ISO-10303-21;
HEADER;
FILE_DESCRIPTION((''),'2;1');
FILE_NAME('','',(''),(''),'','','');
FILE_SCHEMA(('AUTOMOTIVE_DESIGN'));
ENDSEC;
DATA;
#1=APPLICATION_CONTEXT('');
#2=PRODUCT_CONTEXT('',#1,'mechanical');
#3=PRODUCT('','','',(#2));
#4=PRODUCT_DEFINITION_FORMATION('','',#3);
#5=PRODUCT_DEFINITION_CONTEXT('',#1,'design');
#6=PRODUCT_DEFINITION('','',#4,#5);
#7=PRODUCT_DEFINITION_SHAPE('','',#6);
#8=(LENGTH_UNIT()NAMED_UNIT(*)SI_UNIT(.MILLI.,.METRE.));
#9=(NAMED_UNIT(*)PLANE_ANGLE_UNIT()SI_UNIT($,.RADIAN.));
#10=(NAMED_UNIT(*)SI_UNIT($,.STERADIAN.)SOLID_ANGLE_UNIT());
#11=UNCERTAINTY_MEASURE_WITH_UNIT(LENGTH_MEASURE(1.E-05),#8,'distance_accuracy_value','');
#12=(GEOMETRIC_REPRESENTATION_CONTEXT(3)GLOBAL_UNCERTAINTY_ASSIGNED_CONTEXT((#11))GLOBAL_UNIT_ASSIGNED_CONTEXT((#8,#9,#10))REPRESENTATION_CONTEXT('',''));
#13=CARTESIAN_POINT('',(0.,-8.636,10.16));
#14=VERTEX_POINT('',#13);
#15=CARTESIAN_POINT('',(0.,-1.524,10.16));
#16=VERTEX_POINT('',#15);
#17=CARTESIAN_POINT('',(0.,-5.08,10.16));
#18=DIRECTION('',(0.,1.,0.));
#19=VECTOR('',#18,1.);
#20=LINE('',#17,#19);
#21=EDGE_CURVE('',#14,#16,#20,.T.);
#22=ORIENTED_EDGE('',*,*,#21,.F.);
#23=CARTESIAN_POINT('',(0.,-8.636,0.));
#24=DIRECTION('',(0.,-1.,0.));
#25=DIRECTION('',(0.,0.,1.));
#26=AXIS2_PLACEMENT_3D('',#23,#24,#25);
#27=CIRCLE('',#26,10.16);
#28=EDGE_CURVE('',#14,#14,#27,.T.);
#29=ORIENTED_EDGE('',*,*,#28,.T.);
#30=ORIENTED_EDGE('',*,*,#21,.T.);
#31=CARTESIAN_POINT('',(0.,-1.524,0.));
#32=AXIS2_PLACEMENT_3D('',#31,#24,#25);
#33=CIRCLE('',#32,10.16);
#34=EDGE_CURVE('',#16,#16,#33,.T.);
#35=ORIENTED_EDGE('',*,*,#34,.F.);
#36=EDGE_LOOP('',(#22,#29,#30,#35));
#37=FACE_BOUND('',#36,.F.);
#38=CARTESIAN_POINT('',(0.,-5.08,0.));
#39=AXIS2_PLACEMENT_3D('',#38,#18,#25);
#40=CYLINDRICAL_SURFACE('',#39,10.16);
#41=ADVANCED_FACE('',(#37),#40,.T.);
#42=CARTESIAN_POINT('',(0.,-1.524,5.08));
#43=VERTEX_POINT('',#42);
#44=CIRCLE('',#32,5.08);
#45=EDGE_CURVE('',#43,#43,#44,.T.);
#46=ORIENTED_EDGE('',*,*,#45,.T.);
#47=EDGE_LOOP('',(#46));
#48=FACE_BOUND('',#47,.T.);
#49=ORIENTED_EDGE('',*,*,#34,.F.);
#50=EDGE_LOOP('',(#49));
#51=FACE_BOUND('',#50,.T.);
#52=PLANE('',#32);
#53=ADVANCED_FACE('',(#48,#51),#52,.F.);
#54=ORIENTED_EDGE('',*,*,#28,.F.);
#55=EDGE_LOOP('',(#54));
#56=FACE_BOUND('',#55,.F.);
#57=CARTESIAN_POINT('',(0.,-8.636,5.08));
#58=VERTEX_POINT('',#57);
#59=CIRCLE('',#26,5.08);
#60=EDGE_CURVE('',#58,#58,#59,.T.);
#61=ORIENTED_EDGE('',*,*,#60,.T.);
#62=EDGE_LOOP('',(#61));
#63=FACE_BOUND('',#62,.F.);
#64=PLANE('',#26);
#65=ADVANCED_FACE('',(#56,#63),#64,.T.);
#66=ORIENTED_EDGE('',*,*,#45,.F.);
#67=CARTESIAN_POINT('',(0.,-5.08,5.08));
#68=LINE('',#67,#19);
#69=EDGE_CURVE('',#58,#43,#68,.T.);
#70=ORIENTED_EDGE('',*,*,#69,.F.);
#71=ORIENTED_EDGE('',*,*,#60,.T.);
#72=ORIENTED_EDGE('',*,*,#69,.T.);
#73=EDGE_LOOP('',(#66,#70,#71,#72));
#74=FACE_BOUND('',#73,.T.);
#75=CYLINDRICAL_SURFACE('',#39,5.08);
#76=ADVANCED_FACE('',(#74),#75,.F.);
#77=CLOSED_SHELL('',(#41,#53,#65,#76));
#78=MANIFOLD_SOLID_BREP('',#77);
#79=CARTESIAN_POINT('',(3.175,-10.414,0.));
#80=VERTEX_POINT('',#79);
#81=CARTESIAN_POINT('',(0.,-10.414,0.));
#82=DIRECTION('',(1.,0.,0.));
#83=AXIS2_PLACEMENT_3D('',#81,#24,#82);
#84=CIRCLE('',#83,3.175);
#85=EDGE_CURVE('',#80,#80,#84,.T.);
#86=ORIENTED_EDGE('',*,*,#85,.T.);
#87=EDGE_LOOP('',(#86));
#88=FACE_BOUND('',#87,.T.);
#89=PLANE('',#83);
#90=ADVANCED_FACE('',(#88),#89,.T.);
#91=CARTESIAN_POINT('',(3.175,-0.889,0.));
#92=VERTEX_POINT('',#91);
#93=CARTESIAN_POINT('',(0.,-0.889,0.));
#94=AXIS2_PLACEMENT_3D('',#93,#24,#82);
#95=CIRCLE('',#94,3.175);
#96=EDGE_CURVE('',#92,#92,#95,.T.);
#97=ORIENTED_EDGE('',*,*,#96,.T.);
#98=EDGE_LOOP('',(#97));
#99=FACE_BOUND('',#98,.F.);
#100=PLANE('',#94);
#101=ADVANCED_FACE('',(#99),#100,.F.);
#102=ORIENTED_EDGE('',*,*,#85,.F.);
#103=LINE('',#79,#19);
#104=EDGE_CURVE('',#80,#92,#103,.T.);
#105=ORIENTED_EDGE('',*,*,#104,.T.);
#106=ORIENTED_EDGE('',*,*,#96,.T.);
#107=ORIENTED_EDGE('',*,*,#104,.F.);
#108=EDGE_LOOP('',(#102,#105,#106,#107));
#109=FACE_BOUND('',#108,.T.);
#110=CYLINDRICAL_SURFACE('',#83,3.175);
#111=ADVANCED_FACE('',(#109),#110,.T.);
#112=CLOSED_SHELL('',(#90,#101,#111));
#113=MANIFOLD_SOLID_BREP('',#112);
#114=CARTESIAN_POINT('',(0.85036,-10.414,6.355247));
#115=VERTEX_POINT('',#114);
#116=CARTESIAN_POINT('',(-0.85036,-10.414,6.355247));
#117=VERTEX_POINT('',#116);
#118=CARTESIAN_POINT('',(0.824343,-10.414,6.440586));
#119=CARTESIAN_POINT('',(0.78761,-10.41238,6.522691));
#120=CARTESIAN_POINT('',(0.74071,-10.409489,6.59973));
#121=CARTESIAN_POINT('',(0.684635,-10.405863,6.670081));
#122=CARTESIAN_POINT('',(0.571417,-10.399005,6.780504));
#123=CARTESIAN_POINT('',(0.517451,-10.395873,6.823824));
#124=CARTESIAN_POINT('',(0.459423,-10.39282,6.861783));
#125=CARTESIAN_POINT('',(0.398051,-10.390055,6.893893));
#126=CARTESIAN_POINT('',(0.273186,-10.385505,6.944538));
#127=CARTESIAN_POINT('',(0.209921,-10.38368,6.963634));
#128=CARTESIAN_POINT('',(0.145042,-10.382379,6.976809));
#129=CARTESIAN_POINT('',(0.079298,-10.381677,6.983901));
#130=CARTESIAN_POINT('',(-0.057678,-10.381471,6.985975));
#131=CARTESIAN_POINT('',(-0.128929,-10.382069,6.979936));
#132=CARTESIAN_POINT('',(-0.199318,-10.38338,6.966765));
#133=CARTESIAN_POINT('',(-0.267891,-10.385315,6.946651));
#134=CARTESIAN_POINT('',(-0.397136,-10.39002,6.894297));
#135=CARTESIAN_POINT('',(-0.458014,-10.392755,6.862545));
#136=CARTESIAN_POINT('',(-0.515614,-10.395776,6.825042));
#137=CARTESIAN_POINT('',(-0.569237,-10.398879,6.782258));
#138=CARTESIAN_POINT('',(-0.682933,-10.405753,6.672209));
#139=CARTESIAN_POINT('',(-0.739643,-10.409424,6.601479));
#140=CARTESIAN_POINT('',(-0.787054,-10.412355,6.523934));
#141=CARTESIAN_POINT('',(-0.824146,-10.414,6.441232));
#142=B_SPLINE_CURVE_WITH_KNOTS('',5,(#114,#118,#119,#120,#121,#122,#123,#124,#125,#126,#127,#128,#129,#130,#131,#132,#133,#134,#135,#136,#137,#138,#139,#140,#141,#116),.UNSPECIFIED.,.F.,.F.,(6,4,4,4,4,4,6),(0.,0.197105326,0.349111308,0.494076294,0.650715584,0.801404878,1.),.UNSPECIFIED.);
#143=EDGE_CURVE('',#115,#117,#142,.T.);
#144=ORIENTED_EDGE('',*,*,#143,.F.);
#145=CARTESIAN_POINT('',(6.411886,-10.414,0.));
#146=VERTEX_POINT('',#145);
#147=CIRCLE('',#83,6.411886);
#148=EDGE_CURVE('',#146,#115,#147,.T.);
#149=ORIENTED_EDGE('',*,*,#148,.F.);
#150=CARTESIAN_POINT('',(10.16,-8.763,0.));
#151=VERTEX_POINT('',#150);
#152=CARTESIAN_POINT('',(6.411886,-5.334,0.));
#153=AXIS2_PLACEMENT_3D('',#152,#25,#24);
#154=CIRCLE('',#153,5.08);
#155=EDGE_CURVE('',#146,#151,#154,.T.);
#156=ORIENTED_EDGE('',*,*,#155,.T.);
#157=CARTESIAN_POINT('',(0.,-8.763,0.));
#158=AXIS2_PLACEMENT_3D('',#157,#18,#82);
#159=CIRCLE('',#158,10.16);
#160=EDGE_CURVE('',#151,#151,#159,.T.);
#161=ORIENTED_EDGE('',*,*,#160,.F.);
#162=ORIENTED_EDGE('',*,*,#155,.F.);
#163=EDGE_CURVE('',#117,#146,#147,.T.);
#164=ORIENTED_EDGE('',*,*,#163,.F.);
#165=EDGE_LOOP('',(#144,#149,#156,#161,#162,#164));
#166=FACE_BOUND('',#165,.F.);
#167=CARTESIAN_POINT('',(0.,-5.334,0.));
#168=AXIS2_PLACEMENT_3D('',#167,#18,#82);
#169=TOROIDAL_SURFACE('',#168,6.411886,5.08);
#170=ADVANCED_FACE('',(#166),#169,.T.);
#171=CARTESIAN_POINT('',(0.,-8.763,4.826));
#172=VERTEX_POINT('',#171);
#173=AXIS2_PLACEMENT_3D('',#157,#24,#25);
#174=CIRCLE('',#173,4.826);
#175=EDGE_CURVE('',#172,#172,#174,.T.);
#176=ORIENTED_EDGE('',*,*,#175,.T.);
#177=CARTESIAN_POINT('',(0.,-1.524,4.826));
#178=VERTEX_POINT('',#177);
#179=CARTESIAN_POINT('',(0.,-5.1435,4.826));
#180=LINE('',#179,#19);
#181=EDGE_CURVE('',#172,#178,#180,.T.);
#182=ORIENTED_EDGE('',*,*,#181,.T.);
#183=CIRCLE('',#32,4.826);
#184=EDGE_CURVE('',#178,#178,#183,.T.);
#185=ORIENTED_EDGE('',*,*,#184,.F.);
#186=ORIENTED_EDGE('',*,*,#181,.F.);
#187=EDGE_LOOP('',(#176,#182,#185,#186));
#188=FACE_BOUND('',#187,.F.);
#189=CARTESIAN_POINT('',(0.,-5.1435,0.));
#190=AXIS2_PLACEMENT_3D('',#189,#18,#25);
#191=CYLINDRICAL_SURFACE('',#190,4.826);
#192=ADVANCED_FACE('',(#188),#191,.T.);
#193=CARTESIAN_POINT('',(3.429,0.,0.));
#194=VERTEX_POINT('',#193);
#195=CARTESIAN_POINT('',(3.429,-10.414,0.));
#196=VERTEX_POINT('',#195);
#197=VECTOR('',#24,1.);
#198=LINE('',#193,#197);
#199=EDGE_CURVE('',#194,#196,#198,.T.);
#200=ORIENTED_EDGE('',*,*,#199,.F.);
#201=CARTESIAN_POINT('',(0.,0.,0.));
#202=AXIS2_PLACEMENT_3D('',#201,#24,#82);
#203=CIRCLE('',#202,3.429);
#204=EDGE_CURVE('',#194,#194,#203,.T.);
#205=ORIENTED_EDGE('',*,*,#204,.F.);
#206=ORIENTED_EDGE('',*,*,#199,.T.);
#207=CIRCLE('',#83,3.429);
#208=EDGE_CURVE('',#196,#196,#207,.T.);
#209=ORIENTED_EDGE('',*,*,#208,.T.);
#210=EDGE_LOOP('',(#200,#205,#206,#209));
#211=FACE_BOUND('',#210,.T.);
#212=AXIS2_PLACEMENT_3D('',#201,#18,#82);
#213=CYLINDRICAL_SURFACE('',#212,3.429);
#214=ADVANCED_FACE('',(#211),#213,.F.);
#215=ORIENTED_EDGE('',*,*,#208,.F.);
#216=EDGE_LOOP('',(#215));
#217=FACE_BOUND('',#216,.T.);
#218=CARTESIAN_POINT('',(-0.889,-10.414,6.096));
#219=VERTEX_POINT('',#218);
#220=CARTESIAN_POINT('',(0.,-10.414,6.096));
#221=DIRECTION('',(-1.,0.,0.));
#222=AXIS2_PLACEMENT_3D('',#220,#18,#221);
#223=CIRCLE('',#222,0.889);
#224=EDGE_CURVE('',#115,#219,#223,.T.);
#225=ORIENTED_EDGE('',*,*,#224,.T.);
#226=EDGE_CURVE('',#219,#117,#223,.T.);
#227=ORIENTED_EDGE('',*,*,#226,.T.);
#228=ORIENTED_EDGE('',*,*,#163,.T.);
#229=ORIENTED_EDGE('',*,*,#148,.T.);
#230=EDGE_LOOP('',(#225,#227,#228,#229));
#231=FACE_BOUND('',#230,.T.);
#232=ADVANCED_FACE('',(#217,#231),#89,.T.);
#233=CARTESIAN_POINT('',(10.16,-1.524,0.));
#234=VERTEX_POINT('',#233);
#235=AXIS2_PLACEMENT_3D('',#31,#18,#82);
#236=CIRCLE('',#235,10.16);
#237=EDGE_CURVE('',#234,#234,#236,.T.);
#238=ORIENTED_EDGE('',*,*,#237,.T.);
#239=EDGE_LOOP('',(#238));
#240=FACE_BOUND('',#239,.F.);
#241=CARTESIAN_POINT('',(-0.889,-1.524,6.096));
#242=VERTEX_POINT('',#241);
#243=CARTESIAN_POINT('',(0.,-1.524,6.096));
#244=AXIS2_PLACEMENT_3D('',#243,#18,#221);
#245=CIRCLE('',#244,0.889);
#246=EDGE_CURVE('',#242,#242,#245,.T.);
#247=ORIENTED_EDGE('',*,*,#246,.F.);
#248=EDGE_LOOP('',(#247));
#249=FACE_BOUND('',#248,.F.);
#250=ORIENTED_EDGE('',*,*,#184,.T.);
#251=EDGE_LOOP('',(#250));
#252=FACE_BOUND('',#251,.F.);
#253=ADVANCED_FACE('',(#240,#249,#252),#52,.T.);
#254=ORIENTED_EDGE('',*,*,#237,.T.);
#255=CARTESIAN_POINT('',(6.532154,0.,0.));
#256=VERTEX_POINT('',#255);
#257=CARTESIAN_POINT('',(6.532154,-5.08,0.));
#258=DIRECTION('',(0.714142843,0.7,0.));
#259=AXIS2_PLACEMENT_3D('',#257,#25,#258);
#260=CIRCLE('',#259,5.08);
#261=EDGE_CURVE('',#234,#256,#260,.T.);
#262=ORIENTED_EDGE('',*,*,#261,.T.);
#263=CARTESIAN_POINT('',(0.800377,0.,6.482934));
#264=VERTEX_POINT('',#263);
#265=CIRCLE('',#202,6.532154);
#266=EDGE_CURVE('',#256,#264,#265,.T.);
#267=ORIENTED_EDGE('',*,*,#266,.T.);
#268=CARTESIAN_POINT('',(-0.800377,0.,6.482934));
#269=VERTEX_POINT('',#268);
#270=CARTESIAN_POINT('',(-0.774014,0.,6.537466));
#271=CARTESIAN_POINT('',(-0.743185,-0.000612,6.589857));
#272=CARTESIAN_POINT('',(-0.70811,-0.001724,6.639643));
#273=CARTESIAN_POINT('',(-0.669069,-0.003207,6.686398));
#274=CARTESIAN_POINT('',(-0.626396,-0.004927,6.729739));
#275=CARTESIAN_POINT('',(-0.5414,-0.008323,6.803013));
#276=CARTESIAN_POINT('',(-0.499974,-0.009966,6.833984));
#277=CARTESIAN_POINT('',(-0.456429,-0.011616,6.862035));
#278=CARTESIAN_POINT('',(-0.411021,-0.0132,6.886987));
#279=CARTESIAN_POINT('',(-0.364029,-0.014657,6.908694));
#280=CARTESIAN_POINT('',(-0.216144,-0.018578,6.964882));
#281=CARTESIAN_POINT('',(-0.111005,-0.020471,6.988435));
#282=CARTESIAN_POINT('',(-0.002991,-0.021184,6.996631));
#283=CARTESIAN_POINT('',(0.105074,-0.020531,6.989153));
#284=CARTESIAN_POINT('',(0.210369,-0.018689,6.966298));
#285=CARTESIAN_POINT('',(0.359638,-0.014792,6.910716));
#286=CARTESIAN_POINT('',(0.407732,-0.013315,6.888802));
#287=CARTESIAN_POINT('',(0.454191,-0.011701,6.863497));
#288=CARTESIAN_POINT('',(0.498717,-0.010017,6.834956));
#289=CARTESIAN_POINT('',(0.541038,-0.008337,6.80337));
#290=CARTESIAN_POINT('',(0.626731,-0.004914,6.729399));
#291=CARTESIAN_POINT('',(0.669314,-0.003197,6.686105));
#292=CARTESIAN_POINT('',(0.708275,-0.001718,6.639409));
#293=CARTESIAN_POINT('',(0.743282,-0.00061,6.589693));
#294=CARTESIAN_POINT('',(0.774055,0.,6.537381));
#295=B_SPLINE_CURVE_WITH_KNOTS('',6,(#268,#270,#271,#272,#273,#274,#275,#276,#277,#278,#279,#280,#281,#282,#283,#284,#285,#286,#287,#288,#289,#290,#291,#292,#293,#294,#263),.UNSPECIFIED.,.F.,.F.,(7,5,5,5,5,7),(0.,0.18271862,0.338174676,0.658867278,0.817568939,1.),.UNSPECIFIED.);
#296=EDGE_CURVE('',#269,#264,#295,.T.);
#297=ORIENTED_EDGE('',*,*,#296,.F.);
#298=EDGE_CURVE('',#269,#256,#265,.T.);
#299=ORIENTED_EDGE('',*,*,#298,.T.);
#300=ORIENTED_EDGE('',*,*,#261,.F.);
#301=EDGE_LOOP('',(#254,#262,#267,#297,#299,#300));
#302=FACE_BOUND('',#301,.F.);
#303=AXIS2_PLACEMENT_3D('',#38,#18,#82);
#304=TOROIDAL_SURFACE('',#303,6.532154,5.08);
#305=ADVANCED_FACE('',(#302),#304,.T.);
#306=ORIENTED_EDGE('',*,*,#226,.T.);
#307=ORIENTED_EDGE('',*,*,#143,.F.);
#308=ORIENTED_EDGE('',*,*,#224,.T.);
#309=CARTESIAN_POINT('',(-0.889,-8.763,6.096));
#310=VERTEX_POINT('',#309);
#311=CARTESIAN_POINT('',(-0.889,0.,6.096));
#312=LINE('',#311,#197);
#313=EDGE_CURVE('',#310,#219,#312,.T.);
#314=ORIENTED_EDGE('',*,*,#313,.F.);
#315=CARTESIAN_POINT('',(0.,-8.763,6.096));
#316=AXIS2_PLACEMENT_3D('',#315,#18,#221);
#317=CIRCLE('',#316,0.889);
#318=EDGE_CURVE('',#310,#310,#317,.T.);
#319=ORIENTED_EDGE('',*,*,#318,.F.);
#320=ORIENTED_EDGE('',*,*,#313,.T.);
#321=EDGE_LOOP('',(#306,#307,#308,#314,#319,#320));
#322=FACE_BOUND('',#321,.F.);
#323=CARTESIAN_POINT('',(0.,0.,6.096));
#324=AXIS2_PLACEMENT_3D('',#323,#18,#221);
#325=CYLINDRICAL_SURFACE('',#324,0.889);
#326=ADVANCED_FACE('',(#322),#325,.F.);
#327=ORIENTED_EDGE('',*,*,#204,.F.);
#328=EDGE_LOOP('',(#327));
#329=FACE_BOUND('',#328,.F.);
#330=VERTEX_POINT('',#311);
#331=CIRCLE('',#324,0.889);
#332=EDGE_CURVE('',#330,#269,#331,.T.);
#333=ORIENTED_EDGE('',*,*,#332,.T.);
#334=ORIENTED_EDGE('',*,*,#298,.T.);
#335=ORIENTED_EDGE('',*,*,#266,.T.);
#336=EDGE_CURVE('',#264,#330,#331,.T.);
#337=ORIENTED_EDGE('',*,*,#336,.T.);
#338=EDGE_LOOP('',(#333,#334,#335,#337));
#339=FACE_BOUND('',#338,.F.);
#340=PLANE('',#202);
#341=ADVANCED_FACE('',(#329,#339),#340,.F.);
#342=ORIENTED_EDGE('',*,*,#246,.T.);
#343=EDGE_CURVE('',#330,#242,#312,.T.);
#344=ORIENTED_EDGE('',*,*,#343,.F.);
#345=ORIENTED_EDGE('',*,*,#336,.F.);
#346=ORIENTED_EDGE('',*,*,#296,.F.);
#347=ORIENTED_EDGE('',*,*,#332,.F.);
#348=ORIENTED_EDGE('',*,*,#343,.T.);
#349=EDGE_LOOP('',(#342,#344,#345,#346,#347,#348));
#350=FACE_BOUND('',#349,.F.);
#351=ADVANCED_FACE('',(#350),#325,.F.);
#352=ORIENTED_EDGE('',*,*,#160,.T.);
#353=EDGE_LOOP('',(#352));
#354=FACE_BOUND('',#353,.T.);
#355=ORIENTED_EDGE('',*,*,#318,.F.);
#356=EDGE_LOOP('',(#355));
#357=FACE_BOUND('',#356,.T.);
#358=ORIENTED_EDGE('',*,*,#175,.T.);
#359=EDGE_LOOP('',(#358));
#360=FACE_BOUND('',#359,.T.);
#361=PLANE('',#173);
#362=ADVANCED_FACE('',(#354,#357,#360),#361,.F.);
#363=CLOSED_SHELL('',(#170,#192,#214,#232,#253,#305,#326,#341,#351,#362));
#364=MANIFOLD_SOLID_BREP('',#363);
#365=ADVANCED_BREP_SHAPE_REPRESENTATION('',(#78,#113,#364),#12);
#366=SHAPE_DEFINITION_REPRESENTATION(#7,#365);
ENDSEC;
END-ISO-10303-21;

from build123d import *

# Parameters (mm, degrees)
F0_R     = 10.16
F0_R_2   = 3.429
F1_DEPTH = 10.414
F2_W     = 7.239
F2_H     = 5.588
F4_R     = 0.889
F5_DEPTH = 10.415
F6_W     = 7.112
F6_H     = 5.08
F8_R     = 3.175
F9_DEPTH = 9.525


# Not quite as in the source:
# - a fillet or chamfer that OpenCascade refuses, or shapes differently, is made with other operations: its cross-section is extruded or revolved along the edge and cut away or added


with BuildPart() as f1:
    # F0 (on Front) → F1 (new body)
    with BuildSketch(Plane.XZ):
        Circle(F0_R)
        Circle(F0_R_2, mode=Mode.SUBTRACT)
    extrude(amount=F1_DEPTH)

    # F2 (on Right) → F3 (revolve, cut)
    with BuildSketch(Plane.YZ):
        with Locations((-5.1435, 7.62)):
            Rectangle(F2_W, F2_H)
    revolve(axis=Axis((0, -10.414, 0), (0, -1, 0)), mode=Mode.SUBTRACT)

    # F4 (on face) → F5 (cut, through all)
    with BuildSketch(Plane(origin=(0, 0, 0), x_dir=(-1, 0, 0), z_dir=(0, 1, 0))):
        with Locations((0, 6.096)):
            Circle(F4_R)
    extrude(amount=-F5_DEPTH, mode=Mode.SUBTRACT)

    # F10: fillet of radius 5.08 on 2 edges, made by hand

    # F10_s1 → F10_t2 (revolve, cut)
    with BuildSketch(Plane.XY):
        with BuildLine():
            ThreePointArc((6.4118859409, -10.414), (8.459699409, -9.9829633253), (10.16, -8.763))
            Line((10.16, -8.763), (10.16, -10.414))
            Line((10.16, -10.414), (6.4118859409, -10.414))
        make_face()
    revolve(axis=Axis((0, -10.414, 0), (0, -1, 0)), mode=Mode.SUBTRACT)

    # F10_s3 → F10_t4 (revolve, cut)
    with BuildSketch(Plane.XY):
        with BuildLine():
            ThreePointArc((10.16, -1.524), (8.4996298982, -0.3964714157), (6.5321543583, 0))
            Line((6.5321543583, 0), (10.16, 0))
            Line((10.16, 0), (10.16, -1.524))
        make_face()
    revolve(axis=Axis((0, 0, 0), (0, -1, 0)), mode=Mode.SUBTRACT)


with BuildPart() as f7:
    # F6 (on Right) → F7 (revolve)
    with BuildSketch(Plane.YZ):
        with Locations((-5.08, 7.62)):
            Rectangle(F6_W, F6_H)
    revolve(axis=Axis((0, -10.414, 0), (0, -1, 0)))


with BuildPart() as f9:
    # F8 (on face) → F9 (new body)
    with BuildSketch(Plane.XZ.offset(10.414)):
        Circle(F8_R)
    extrude(amount=-F9_DEPTH)


solid = Compound([f1.part, f7.part, f9.part])
